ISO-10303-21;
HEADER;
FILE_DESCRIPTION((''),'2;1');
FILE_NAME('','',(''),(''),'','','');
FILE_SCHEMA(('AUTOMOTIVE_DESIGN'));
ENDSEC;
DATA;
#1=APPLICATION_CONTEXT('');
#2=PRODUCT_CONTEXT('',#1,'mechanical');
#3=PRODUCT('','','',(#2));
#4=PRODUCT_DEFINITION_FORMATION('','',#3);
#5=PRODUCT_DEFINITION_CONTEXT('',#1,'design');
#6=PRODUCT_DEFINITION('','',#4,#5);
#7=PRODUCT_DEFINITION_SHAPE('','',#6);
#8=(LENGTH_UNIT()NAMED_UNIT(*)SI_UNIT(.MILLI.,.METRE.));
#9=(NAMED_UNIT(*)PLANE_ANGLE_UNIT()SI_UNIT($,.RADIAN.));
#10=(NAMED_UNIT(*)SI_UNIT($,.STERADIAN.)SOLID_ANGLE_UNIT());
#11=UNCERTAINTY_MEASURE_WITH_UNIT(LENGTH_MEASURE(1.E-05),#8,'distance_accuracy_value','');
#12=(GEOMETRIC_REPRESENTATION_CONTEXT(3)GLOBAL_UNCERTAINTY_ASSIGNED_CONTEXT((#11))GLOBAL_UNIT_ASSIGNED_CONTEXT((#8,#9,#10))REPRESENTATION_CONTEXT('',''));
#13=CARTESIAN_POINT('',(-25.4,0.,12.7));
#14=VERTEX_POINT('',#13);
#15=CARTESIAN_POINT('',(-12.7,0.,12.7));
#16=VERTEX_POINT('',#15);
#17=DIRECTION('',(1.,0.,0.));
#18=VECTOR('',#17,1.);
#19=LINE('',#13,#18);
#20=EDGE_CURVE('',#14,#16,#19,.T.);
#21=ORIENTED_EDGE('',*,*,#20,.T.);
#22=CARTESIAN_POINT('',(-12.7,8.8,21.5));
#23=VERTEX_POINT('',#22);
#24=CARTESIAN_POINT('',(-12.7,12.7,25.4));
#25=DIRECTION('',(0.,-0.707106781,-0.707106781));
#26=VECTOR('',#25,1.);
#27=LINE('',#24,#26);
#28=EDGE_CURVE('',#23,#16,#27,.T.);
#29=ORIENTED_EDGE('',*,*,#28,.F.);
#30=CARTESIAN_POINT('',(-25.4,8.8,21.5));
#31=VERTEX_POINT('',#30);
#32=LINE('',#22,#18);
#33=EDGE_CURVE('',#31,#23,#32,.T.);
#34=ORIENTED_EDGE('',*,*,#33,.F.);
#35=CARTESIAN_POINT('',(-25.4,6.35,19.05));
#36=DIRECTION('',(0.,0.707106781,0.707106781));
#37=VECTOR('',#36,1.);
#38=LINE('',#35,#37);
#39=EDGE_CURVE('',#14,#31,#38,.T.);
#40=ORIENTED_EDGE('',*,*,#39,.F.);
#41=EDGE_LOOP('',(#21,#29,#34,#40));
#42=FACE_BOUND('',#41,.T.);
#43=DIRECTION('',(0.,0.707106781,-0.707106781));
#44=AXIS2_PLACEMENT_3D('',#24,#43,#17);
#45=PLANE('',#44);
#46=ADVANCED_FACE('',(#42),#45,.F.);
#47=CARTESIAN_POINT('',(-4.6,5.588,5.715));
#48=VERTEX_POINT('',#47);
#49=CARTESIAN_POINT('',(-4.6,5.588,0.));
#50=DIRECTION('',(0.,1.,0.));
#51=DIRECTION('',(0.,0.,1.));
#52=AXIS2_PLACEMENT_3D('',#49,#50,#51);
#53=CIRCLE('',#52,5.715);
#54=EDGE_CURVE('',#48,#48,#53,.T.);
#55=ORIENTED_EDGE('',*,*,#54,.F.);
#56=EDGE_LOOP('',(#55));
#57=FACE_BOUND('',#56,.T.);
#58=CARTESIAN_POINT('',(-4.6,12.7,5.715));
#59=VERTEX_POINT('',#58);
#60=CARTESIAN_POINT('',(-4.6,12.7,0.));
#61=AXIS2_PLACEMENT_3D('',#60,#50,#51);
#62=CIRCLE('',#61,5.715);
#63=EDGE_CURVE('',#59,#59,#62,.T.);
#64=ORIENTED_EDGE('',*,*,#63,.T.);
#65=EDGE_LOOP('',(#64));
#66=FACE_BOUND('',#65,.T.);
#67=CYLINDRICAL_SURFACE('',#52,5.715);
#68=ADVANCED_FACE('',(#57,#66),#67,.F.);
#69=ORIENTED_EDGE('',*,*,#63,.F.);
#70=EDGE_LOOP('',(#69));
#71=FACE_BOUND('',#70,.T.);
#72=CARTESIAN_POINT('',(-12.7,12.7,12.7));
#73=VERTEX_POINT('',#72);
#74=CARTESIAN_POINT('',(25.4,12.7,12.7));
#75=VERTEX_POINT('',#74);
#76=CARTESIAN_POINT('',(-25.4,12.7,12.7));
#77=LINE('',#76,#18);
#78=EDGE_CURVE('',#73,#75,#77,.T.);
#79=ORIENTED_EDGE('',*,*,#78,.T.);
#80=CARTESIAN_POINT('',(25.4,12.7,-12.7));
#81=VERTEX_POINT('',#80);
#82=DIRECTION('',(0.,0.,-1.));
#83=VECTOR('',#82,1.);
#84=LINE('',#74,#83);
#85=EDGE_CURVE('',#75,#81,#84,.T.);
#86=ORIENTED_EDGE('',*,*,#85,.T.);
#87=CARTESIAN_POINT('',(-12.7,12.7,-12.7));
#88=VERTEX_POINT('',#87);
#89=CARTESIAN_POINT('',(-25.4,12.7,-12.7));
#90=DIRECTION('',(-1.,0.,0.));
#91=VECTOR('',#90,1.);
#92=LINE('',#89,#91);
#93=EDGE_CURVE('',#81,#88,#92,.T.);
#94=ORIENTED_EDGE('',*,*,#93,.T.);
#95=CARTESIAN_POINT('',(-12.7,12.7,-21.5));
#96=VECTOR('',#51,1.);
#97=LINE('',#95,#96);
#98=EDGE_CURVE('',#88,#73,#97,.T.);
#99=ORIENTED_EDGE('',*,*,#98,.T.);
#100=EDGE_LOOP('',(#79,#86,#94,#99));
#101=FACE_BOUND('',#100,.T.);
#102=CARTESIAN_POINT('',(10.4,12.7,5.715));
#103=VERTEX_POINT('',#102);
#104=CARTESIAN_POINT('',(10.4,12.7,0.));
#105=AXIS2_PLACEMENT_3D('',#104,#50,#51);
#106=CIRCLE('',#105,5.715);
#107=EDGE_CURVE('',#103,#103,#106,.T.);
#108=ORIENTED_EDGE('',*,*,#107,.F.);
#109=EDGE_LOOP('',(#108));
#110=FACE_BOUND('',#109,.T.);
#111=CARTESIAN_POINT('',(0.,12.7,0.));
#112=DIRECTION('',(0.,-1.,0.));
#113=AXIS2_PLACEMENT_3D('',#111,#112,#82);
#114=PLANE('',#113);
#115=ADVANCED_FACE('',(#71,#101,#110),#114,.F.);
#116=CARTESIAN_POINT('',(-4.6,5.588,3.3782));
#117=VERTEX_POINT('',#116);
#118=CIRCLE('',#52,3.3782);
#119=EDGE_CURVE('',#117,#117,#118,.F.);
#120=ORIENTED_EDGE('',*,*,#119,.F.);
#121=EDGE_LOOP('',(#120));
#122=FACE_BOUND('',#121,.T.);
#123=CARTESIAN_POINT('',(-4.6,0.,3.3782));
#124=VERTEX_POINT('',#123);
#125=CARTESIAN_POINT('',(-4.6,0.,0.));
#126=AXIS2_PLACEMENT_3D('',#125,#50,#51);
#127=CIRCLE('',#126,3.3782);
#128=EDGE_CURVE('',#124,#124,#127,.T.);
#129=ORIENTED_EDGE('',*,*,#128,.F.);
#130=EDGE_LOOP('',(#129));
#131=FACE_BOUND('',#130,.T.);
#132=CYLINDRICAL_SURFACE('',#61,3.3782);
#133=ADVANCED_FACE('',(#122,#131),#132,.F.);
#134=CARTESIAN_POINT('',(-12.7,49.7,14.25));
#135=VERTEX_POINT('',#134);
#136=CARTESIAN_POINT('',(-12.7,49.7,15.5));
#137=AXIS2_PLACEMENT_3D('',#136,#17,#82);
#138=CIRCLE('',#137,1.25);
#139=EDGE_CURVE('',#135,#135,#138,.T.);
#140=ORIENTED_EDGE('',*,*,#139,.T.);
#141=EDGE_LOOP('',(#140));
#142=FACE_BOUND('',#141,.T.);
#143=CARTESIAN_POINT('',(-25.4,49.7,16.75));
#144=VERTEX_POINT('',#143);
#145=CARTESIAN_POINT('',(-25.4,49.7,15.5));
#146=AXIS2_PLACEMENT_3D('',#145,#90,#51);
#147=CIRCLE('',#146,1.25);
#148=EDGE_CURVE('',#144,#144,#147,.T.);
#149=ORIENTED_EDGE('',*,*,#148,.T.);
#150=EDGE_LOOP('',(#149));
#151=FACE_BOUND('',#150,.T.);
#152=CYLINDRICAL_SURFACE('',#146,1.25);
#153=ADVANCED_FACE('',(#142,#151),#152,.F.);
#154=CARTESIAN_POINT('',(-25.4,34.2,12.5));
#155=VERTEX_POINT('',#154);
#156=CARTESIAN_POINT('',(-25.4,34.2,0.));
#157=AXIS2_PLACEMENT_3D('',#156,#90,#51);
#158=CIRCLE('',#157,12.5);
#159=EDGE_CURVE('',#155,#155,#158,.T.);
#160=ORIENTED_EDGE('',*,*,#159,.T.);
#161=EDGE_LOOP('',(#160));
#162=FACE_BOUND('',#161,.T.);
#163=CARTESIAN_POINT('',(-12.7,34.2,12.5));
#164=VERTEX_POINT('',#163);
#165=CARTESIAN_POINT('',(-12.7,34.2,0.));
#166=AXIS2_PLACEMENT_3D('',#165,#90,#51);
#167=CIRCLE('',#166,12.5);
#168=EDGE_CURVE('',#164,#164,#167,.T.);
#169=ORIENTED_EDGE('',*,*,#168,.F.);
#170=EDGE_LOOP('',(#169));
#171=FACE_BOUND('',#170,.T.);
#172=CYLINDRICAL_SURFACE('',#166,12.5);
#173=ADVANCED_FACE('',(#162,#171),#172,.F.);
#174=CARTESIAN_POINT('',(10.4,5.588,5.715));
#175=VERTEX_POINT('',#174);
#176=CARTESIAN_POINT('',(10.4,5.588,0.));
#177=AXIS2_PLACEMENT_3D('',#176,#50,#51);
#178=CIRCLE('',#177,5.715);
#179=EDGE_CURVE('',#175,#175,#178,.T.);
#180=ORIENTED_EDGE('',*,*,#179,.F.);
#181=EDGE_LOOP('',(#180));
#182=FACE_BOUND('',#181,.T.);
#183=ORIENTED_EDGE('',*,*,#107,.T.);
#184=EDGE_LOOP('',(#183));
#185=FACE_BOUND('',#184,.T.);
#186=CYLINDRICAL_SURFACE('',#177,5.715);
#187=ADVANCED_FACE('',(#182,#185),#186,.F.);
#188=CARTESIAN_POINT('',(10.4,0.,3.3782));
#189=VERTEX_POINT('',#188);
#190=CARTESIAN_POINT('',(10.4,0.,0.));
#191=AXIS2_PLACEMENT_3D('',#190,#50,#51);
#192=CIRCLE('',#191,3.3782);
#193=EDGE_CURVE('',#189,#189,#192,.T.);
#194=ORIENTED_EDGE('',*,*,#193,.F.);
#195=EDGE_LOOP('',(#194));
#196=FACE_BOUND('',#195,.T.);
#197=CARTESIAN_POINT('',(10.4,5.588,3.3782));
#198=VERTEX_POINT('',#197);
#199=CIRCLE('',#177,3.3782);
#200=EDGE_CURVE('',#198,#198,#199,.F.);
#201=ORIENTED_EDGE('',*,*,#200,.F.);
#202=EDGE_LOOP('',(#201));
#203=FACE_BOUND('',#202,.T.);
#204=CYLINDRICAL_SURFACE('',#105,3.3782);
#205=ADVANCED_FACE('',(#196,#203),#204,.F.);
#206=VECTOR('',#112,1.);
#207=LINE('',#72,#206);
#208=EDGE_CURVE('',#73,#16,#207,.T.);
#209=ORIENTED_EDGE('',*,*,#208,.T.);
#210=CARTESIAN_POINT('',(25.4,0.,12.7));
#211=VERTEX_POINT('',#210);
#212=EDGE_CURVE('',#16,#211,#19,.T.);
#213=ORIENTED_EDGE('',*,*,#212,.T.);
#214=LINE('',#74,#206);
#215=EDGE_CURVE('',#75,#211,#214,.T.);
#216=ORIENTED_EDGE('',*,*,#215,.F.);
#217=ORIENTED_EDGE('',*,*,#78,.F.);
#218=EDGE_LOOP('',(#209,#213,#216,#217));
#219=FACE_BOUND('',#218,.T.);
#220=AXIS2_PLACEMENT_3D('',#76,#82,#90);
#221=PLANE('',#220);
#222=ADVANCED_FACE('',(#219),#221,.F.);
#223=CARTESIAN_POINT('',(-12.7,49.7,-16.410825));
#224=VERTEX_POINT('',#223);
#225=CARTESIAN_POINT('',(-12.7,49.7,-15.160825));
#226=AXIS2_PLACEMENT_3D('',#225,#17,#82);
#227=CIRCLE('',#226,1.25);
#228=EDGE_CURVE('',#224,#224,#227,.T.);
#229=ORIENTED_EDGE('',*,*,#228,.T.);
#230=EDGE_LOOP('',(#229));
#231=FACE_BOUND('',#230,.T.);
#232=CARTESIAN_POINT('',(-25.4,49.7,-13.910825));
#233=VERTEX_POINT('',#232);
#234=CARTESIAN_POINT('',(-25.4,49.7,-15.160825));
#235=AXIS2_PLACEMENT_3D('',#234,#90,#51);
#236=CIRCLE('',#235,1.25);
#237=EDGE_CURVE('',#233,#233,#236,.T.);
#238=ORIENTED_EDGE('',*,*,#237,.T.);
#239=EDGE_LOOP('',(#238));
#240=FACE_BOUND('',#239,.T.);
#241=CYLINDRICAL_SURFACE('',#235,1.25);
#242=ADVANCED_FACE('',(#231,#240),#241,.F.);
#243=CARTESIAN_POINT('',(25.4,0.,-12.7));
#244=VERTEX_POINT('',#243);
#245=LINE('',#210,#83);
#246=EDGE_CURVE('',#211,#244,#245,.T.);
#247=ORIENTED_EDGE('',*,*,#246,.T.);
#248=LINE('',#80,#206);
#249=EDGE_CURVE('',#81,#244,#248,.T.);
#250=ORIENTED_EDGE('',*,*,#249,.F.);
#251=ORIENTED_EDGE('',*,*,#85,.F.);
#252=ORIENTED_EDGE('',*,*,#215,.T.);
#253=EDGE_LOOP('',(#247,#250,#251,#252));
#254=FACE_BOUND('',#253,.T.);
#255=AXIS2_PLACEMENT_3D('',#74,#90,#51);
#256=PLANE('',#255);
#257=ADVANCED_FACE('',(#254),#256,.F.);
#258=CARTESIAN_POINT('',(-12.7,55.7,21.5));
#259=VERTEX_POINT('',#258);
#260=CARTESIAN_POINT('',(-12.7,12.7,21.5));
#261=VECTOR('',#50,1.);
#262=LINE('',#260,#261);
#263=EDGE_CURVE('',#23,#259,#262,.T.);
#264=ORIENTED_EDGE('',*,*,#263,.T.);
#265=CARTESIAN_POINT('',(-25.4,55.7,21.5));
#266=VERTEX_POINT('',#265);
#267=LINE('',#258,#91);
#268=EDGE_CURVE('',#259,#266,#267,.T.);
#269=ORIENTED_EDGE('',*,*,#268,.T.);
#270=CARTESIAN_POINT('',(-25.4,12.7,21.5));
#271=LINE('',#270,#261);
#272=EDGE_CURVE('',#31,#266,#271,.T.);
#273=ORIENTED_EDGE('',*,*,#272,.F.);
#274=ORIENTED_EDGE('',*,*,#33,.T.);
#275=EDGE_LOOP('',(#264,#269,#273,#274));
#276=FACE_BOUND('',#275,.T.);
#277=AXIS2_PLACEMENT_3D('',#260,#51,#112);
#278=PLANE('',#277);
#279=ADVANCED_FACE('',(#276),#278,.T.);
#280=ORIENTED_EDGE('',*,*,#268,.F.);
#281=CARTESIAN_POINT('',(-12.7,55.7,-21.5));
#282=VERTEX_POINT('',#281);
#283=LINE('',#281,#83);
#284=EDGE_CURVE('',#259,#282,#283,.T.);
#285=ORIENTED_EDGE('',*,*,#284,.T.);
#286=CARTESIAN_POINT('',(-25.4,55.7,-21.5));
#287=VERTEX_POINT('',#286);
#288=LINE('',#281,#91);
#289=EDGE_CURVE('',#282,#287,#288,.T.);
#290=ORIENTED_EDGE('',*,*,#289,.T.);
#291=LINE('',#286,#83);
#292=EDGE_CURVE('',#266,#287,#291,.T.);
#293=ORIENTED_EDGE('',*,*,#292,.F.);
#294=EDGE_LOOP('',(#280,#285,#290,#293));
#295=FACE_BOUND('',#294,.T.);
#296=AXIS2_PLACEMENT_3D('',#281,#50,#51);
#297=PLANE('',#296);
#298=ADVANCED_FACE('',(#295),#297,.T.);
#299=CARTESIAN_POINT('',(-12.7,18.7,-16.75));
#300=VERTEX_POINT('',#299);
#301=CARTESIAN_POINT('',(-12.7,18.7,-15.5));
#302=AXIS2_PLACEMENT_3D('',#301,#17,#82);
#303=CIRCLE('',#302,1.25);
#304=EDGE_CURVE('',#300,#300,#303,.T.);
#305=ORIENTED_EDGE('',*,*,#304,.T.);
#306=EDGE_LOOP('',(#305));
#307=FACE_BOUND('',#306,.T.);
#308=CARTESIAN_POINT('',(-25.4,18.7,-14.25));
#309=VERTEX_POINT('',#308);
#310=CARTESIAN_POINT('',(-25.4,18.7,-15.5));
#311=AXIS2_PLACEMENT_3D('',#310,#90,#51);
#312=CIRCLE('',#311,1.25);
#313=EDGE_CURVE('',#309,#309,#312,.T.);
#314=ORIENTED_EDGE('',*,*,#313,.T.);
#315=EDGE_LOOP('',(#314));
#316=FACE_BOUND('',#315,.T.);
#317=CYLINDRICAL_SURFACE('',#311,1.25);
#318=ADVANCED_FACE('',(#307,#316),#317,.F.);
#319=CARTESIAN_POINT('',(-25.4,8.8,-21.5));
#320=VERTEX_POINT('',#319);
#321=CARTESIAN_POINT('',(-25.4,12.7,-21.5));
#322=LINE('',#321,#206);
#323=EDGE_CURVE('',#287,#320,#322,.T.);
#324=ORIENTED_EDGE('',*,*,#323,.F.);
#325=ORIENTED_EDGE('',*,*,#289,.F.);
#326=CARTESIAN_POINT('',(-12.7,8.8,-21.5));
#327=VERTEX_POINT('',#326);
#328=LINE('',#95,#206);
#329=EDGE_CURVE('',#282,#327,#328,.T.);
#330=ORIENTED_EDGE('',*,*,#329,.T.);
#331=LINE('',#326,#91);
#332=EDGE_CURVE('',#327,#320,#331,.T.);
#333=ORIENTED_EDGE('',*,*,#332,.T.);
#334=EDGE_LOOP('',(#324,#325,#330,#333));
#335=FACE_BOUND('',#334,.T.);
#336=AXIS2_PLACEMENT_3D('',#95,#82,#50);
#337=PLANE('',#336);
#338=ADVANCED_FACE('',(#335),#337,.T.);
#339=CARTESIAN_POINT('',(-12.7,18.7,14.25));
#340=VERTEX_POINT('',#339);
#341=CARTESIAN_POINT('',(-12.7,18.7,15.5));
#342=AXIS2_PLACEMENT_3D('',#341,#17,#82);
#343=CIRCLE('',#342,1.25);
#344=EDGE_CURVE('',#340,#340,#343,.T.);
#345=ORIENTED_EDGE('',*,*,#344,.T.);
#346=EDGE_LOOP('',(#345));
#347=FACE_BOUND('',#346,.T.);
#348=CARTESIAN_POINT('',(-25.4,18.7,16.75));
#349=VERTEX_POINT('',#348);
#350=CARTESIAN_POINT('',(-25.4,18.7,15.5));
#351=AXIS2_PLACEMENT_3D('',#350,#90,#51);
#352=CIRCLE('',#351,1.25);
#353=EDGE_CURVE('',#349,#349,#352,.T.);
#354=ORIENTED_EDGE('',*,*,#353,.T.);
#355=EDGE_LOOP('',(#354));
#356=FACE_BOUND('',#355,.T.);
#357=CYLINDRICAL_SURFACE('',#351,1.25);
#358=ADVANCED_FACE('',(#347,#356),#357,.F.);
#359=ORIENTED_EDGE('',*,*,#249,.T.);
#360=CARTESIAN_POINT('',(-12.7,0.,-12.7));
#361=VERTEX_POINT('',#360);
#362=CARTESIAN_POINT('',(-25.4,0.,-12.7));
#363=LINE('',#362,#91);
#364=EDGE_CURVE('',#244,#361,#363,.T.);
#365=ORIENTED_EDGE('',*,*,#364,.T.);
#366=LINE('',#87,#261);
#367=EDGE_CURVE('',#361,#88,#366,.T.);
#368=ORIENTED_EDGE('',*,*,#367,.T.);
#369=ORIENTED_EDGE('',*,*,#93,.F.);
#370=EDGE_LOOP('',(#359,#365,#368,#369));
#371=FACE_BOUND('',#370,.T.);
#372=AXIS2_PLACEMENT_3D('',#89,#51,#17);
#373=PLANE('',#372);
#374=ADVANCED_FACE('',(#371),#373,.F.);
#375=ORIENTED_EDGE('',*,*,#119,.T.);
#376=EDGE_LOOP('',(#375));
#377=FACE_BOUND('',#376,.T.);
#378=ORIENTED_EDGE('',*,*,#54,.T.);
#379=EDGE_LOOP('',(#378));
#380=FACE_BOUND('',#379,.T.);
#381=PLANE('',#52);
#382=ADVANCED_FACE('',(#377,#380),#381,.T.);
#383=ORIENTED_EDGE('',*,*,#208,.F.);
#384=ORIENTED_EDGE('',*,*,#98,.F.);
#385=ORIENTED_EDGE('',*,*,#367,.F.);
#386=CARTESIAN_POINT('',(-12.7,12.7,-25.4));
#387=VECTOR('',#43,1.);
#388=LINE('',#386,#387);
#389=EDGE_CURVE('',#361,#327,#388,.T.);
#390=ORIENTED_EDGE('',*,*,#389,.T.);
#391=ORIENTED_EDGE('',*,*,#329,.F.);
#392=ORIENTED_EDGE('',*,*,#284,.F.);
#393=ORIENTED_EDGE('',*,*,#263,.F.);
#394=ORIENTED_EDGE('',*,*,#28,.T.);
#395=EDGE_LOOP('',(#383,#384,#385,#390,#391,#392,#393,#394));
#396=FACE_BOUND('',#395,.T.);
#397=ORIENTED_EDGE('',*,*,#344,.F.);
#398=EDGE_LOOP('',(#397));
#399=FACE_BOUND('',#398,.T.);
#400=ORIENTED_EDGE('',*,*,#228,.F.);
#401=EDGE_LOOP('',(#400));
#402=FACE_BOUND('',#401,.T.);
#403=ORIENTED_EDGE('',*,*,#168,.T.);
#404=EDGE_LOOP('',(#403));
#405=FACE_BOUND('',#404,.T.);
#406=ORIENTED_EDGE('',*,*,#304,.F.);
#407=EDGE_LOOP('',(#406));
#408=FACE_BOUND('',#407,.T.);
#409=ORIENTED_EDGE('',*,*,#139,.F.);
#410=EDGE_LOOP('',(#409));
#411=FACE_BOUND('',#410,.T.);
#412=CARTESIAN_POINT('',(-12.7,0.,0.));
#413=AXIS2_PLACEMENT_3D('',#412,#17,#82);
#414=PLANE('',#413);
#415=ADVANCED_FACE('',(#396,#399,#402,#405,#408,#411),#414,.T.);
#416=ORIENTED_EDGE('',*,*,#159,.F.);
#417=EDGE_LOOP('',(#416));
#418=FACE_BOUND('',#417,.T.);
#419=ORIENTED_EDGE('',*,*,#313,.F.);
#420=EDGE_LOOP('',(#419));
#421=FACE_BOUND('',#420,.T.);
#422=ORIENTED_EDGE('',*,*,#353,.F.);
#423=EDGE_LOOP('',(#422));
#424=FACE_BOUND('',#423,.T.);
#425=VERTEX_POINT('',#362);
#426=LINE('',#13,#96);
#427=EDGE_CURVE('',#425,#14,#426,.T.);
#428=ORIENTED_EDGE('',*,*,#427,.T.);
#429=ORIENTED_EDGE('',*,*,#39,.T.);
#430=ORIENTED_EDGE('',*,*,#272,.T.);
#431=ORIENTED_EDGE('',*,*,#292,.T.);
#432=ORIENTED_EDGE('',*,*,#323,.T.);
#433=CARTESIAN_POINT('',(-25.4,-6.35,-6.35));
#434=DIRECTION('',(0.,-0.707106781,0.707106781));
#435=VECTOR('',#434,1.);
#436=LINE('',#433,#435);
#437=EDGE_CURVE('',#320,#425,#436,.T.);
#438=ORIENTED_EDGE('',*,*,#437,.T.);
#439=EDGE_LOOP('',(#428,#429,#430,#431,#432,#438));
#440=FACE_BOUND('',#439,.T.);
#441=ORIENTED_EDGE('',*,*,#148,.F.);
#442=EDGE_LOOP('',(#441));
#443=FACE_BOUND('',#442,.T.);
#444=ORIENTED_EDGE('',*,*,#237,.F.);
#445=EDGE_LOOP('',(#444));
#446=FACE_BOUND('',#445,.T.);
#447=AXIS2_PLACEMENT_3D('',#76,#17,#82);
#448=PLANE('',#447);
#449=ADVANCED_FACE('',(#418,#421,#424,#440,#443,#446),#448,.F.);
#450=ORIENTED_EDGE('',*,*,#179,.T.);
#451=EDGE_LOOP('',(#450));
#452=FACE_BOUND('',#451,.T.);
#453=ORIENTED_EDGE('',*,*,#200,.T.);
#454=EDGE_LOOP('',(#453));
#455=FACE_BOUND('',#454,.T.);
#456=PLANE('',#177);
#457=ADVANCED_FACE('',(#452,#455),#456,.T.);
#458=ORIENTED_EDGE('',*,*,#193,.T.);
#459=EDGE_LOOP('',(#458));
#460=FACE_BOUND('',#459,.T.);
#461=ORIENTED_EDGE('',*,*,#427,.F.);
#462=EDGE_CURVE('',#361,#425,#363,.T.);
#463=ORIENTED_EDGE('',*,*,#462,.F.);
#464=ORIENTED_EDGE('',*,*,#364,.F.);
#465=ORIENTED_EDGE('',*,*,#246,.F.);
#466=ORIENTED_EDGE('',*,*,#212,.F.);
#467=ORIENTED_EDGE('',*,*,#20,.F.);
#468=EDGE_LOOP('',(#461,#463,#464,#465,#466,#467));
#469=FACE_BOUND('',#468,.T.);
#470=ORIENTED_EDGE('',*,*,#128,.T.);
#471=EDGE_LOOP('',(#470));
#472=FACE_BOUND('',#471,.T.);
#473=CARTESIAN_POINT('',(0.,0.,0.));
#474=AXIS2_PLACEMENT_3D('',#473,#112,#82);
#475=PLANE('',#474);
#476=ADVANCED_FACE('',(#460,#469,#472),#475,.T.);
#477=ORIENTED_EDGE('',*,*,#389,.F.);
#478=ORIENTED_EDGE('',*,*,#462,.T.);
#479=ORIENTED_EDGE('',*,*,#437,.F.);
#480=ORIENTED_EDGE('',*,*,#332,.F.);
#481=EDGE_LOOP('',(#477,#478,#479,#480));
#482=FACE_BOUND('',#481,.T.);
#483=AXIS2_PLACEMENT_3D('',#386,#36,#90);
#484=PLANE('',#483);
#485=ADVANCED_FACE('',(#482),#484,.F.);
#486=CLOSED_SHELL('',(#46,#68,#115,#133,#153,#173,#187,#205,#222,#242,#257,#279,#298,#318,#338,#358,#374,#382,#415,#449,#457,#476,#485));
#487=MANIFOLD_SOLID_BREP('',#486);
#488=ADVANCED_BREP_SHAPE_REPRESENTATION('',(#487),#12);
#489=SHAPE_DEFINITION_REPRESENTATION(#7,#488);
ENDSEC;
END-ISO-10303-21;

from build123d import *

# Parameters (mm, degrees)
SKETCH1_W                   = 50.8
SKETCH1_H                   = 25.4
BOSS_EXTRUDE1_DEPTH         = 12.7
SKETCH2_W                   = 43
SKETCH2_H                   = 43
SKETCH2_R                   = 12.5
BOSS_EXTRUDE2_DEPTH         = 12.7
CHAMFER1_SIZE               = 12.7
TAP_DRILL_FOR_M3X0_5_TAP1_D = 2.5
F_1_4_CLEARANCE_HOLE1_D     = 6.7564
SKETCH8_R                   = 5.715
CUT_EXTRUDE1_DEPTH          = 7.112


with BuildPart() as part:
    # Sketch1 → Boss-Extrude1 (new body)
    with BuildSketch(Plane(origin=(0, 0, 0), x_dir=(1, 0, 0), z_dir=(0, 1, 0))):
        Rectangle(SKETCH1_W, SKETCH1_H)
    extrude(amount=BOSS_EXTRUDE1_DEPTH)

    # Sketch2 → Boss-Extrude2 (add)
    with BuildSketch(Plane.ZY.offset(25.4)):
        with Locations((0, 34.2)):
            Rectangle(SKETCH2_W, SKETCH2_H)
        with Locations((0, 34.2)):
            Circle(SKETCH2_R, mode=Mode.SUBTRACT)
    extrude(amount=-BOSS_EXTRUDE2_DEPTH)

    # Chamfer1
    # the kernel refuses this chamfer: 12.7 mm, written as the material it adds along each edge
    with BuildSketch(Plane(origin=(-25.4, 12.7, 12.7), x_dir=(0, -0.9996219169112966, -0.027495876610586334), z_dir=(1, 0, 0))) as chamfer1_piece_1_section:
        Polygon((CHAMFER1_SIZE * 0.999621916911, -CHAMFER1_SIZE * 0.0274958766106), (-CHAMFER1_SIZE * 0.0274958766106, -CHAMFER1_SIZE * 0.999621916911), (0, 0), align=None)
    chamfer1_piece_1 = extrude(amount=12.7, mode=Mode.PRIVATE)
    chamfer1_piece_1 = split(chamfer1_piece_1, bisect_by=Plane(origin=(-19.05, 8.16124498, 21.5), z_dir=(0, 0, -1)), keep=Keep.TOP, mode=Mode.PRIVATE)
    add(chamfer1_piece_1)
    with BuildSketch(Plane(origin=(-12.7, 12.7, -12.7), x_dir=(0, -0.9996219169112966, 0.027495876610586334), z_dir=(-1, 0, 0))) as chamfer1_piece_2_section:
        Polygon((CHAMFER1_SIZE * 0.999621916911, -CHAMFER1_SIZE * 0.0274958766106), (-CHAMFER1_SIZE * 0.0274958766106, -CHAMFER1_SIZE * 0.999621916911), (0, 0), align=None)
    chamfer1_piece_2 = extrude(amount=12.7, mode=Mode.PRIVATE)
    chamfer1_piece_2 = split(chamfer1_piece_2, bisect_by=Plane(origin=(-19.05, 8.16124498, -21.5), z_dir=(0, 0, 1)), keep=Keep.TOP, mode=Mode.PRIVATE)
    add(chamfer1_piece_2)

    # Tap Drill for M3x0.5 Tap1 (through all)
    with Locations(Plane.ZY.offset(25.4)):
        with Locations((-15.160825054, 49.7), (15.5, 49.7), (15.5, 18.7), (-15.5, 18.7)):
            Hole(TAP_DRILL_FOR_M3X0_5_TAP1_D / 2)

    # 1/4 Clearance Hole1 (through all)
    with Locations(Plane(origin=(0, 12.7, 0), x_dir=(1, 0, 0), z_dir=(0, 1, 0))):
        with Locations((-4.6, 0), (10.4, 0)):
            Hole(F_1_4_CLEARANCE_HOLE1_D / 2)

    # Sketch8 → Cut-Extrude1 (cut)
    with BuildSketch(Plane(origin=(0, 12.7, 0), x_dir=(1, 0, 0), z_dir=(0, 1, 0))):
        with Locations(Location((-4.6, 0, 0), (0, 0, 270))):
            Circle(SKETCH8_R)
        with Locations(Location((10.4, 0, 0), (0, 0, 270))):
            Circle(SKETCH8_R)
    extrude(amount=-CUT_EXTRUDE1_DEPTH, mode=Mode.SUBTRACT)


solid = part.part
